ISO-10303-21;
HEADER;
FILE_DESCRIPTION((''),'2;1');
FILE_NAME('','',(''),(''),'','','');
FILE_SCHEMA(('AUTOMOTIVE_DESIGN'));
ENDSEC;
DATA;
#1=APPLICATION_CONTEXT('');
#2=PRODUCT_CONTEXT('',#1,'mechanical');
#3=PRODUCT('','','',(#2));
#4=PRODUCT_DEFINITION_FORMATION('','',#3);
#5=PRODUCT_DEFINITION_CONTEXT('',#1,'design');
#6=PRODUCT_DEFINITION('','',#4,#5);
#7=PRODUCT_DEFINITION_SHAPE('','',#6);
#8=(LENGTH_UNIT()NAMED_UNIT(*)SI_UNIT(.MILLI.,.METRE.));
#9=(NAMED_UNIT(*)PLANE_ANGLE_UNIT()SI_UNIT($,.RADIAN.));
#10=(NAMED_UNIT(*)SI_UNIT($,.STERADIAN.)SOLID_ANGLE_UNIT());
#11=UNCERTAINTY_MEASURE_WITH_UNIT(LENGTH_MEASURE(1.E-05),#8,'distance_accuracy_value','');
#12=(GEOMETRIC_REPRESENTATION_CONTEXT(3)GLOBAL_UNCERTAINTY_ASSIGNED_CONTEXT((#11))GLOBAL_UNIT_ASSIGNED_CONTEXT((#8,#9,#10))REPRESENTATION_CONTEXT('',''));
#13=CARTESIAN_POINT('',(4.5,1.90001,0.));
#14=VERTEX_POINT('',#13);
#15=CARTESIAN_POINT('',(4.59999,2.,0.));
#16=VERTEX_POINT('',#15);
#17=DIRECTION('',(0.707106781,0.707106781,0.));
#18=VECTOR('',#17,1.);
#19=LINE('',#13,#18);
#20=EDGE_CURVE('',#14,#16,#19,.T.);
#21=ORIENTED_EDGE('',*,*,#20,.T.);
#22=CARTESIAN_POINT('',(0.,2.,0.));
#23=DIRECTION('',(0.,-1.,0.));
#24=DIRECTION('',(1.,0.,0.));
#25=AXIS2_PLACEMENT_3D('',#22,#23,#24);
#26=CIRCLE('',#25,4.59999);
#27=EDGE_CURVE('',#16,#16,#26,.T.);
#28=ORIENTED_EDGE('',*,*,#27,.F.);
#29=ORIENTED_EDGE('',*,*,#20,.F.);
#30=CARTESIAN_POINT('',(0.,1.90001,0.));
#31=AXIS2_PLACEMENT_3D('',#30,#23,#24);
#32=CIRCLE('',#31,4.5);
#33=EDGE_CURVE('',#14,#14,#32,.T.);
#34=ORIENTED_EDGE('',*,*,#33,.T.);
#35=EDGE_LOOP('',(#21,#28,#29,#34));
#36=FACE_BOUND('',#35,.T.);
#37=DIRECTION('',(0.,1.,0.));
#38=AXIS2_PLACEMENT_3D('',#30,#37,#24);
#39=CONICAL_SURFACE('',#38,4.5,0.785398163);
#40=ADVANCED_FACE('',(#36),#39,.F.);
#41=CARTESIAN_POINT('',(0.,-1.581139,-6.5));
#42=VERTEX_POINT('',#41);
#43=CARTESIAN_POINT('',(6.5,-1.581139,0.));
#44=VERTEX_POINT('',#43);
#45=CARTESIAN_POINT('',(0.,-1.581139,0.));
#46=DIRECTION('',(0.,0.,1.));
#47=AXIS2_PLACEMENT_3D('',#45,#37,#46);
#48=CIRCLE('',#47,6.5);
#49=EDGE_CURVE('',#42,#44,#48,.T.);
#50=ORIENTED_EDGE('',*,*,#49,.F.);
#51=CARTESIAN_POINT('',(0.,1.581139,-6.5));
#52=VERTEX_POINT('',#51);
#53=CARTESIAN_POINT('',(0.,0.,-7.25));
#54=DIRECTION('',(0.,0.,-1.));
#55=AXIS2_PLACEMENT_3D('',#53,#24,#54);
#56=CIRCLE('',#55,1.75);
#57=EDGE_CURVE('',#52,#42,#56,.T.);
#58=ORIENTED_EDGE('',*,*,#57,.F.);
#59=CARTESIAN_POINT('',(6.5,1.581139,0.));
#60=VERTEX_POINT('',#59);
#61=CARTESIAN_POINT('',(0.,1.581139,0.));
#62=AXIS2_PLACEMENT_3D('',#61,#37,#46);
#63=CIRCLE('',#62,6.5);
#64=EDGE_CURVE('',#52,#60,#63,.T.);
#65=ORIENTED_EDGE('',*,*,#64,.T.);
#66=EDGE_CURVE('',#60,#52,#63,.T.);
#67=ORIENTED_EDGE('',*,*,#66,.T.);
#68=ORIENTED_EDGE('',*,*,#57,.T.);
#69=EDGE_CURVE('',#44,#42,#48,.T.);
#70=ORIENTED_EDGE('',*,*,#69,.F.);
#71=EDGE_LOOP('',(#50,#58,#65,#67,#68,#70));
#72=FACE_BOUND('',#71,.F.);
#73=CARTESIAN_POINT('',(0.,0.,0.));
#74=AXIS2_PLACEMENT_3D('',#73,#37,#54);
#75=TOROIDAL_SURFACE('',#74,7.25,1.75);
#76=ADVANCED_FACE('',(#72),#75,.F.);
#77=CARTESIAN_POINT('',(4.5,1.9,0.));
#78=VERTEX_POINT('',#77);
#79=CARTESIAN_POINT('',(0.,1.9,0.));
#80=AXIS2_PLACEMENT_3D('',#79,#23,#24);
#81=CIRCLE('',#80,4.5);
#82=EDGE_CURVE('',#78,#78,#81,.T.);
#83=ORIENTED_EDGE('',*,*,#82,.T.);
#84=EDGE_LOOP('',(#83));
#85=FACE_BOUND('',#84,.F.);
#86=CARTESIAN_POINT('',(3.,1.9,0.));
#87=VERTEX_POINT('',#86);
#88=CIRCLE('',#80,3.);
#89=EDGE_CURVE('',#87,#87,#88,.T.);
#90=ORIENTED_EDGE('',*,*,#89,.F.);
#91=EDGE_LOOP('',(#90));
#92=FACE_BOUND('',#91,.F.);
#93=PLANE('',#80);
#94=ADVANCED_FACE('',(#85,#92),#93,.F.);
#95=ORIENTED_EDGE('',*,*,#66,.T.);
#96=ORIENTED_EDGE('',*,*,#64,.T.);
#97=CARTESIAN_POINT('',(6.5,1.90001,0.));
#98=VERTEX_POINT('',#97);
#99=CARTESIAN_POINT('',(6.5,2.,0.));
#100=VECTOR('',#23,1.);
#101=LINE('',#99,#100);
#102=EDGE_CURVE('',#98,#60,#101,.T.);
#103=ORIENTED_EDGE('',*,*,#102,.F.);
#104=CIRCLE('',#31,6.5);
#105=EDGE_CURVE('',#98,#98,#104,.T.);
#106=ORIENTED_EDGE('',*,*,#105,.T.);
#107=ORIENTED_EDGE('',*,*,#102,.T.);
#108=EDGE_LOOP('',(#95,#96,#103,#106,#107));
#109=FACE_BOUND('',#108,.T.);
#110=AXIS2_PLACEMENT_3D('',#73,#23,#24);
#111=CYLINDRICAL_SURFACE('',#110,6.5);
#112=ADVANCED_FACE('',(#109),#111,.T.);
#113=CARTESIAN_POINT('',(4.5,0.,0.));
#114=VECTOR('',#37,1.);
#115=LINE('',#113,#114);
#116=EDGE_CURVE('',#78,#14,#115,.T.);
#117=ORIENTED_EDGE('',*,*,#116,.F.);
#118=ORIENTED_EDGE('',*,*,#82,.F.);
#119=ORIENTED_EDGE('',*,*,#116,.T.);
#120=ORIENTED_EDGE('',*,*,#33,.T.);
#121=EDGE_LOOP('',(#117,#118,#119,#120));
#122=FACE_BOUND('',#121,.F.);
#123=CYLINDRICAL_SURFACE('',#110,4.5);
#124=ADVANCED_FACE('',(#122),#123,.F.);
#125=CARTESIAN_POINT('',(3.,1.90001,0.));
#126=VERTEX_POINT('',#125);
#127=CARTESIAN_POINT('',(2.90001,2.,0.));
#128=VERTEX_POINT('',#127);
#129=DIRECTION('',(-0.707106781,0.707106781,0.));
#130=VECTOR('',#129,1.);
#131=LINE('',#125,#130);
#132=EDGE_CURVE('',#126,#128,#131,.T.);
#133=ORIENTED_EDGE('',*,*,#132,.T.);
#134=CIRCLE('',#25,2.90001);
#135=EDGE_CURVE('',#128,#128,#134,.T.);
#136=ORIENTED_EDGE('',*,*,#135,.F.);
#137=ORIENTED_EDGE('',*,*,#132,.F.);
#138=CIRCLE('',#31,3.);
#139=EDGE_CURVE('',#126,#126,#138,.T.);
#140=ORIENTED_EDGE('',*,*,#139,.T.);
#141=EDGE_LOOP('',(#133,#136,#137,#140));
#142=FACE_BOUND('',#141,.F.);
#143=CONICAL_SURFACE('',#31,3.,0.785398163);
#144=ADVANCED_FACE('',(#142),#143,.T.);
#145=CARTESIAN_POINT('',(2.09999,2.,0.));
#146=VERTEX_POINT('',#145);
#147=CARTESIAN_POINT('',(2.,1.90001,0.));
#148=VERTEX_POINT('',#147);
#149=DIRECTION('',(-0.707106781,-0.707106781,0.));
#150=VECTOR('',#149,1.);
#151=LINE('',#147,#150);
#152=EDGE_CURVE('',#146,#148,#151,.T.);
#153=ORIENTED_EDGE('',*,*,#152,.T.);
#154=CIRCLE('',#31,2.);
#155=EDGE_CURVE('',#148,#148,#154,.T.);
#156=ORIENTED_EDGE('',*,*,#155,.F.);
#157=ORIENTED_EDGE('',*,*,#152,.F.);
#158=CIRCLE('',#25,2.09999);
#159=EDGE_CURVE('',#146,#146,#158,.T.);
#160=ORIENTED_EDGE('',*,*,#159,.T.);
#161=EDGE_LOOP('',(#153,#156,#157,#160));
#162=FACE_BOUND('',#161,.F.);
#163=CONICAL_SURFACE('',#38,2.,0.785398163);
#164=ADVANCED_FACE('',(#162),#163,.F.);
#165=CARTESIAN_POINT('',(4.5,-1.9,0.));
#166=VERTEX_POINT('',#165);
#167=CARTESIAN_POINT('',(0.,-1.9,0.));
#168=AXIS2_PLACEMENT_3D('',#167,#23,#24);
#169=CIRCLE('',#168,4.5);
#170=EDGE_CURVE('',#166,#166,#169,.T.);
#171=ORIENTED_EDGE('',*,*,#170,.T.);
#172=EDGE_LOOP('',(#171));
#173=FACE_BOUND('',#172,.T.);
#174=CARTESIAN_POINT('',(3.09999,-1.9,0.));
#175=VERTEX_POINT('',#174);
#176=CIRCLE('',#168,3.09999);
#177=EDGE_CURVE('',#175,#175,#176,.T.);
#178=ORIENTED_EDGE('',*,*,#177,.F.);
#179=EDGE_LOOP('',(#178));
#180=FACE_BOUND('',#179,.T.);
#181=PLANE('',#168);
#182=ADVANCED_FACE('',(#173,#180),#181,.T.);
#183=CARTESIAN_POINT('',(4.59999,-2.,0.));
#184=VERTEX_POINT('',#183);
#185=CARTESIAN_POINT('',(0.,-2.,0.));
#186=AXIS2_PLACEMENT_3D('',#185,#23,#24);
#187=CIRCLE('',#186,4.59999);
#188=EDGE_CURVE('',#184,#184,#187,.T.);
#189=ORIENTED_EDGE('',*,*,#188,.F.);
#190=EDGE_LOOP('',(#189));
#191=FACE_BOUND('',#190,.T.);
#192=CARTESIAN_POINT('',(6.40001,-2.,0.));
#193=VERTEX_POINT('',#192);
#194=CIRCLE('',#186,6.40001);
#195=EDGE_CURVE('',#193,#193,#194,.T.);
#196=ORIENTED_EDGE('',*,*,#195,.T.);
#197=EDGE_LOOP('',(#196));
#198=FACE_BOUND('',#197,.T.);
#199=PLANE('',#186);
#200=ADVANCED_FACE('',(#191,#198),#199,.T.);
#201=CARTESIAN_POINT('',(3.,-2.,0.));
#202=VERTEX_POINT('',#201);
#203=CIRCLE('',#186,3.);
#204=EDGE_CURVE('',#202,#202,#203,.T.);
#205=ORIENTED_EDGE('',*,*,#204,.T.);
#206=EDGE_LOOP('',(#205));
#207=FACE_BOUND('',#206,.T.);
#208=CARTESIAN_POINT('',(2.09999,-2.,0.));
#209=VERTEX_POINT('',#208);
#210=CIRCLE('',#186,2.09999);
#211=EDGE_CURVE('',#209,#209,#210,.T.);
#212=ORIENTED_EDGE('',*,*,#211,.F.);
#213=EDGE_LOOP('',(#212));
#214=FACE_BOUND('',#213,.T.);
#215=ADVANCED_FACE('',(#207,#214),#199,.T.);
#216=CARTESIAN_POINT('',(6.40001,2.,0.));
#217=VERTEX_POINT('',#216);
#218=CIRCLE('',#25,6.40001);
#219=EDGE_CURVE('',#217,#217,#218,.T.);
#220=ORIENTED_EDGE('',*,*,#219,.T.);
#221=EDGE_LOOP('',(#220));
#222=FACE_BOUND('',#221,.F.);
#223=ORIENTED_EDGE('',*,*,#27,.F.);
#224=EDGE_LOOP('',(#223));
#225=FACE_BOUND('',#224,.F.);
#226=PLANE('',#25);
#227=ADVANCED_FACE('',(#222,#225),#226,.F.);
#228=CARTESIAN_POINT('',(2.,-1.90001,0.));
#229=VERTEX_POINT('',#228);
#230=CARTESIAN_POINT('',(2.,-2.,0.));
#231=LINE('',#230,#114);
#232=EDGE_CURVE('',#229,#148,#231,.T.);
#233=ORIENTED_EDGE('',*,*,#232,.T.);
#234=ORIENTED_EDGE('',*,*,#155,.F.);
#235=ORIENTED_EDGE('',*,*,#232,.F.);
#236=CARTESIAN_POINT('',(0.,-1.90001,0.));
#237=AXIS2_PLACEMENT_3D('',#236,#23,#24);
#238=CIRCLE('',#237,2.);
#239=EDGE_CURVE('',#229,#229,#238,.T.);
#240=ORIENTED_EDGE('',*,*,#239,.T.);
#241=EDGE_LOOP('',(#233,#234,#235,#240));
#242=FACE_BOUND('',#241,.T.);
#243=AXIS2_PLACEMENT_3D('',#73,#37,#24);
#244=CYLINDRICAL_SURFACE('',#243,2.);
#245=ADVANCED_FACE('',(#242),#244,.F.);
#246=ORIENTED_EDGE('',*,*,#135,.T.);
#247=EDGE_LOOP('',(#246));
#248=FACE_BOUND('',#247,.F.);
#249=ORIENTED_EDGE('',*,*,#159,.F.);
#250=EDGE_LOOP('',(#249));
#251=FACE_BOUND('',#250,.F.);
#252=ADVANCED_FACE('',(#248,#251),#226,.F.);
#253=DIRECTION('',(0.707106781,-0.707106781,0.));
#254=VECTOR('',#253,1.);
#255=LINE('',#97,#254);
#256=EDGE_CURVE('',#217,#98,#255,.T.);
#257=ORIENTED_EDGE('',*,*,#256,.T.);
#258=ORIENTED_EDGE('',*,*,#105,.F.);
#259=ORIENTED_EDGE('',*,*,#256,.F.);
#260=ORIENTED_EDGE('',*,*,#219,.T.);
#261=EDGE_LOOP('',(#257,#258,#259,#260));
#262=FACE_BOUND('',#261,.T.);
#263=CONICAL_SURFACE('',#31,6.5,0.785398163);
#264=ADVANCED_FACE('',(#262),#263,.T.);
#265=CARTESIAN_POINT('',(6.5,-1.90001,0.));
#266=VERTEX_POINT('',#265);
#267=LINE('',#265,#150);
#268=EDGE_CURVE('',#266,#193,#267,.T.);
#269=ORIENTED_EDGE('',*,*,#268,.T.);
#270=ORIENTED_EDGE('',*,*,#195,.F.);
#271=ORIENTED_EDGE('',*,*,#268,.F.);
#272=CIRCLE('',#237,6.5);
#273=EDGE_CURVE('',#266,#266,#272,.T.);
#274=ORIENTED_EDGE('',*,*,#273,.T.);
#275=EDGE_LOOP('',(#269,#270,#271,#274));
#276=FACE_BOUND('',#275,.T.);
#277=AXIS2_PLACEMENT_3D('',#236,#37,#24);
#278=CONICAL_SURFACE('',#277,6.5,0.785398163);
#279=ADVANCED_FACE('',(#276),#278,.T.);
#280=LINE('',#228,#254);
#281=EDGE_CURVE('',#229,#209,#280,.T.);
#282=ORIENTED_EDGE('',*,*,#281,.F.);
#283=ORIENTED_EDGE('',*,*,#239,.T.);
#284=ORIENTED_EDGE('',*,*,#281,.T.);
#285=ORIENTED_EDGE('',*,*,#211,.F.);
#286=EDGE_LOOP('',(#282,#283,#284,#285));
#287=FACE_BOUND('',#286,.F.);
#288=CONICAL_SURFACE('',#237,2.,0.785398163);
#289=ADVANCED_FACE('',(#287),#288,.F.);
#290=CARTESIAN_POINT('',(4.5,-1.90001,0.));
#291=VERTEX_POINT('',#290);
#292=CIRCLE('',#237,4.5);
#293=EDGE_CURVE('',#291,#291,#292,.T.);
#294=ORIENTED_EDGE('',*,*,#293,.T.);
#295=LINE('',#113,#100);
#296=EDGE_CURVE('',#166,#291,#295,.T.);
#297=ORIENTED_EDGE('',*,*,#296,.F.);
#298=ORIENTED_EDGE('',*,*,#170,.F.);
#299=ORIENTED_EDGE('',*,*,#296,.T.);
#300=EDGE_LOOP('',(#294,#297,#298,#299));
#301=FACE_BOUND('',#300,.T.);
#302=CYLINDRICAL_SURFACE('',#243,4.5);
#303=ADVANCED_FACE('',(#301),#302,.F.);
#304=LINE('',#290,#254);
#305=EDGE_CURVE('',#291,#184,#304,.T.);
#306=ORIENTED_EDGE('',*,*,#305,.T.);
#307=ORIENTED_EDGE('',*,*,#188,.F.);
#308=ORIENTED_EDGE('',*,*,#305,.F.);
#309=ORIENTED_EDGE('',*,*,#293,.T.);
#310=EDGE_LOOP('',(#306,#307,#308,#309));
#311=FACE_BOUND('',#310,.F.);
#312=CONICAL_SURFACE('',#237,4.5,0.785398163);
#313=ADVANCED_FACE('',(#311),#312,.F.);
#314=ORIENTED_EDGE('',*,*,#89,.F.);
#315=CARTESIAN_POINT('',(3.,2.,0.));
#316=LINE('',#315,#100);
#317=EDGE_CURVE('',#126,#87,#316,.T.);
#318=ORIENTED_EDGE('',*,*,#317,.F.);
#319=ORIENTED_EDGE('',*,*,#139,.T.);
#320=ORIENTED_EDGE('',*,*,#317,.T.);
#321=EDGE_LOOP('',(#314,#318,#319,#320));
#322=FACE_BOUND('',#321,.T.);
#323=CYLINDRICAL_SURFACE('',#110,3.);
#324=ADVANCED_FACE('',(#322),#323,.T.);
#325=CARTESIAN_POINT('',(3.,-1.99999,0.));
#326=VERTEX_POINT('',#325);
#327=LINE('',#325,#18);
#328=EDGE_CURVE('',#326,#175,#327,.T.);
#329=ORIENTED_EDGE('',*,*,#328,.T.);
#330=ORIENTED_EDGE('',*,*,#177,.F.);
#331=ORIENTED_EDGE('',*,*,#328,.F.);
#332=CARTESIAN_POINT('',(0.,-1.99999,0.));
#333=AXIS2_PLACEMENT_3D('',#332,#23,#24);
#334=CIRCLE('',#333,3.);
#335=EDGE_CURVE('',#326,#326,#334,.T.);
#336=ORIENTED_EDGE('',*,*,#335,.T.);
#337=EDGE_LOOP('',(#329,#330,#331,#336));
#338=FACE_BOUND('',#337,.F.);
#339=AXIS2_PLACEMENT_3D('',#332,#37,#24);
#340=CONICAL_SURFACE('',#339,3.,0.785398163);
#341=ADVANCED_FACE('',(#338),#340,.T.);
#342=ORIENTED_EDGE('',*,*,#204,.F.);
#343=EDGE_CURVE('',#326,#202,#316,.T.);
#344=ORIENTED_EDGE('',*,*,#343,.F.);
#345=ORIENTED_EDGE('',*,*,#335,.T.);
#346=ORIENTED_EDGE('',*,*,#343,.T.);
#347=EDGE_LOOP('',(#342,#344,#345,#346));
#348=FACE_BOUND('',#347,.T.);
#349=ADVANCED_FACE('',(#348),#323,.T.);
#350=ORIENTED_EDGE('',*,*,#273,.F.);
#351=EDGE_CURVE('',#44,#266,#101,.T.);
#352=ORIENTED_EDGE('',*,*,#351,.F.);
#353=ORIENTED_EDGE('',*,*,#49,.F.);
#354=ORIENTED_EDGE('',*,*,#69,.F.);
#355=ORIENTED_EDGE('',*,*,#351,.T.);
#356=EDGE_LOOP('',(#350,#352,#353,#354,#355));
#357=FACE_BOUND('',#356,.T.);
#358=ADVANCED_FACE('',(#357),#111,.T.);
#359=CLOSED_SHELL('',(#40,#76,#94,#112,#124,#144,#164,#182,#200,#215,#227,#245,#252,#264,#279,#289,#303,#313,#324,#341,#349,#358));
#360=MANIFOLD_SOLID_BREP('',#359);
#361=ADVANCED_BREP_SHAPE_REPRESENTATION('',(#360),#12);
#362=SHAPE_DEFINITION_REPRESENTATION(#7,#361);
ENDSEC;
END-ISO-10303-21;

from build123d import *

# Parameters (mm, degrees)
F0_R     = 4.5
F0_R_2   = 3
F1_DEPTH = 1.9
F0_R_3   = 6.5
F0_R_4   = 2
F2_DEPTH = 2
F3_R     = 1.75
F5_SIZE  = 0.09999


# Not quite as in the source:
# - a fillet or chamfer is up to 0.001 mm smaller than in the source, because OpenCascade refuses the exact size


with BuildPart() as f1:
    # F0 (on Front) → F1 (new body, symmetric)
    with BuildSketch(Plane.XZ):
        Circle(F0_R)
        Circle(F0_R_2, mode=Mode.SUBTRACT)
    extrude(amount=F1_DEPTH, both=True)

    # F0 (on Front) → F2 (join, symmetric)
    with BuildSketch(Plane.XZ):
        Circle(F0_R_3)
        Circle(F0_R, mode=Mode.SUBTRACT)
        Circle(F0_R_2)
        Circle(F0_R_4, mode=Mode.SUBTRACT)
    extrude(amount=F2_DEPTH, both=True)

    # F4: sweep along a path in F4_path
    with BuildLine(Plane(origin=(6.5, -2, 0), x_dir=(0, 0, -1), z_dir=(0, 1, 0))) as f4_path:
        CenterArc((0, 6.5), 6.5, 0, 360)
    # F3 (on Right) → F4 (sweep, cut)
    with BuildSketch(Plane.YZ):
        with Locations((0, 7.25)):
            Circle(F3_R)
    sweep(path=f4_path.line, mode=Mode.SUBTRACT)

    # F5 (size 0.1 in the source; OpenCascade refuses exactly that, so slightly less here)
    f5_edges = [f1.edges().sort_by_distance(p)[0] for p in [
        (-6.5, -2, 0),
        (-4.5, -2, 0),
        (-3, -1.9, 0),
        (-2, -2, 0),
        (-2, 2, 0),
        (-3, 2, 0),
        (-4.5, 2, 0),
        (-6.5, 2, 0),
    ]]
    chamfer(f5_edges, length=F5_SIZE)


solid = f1.part
